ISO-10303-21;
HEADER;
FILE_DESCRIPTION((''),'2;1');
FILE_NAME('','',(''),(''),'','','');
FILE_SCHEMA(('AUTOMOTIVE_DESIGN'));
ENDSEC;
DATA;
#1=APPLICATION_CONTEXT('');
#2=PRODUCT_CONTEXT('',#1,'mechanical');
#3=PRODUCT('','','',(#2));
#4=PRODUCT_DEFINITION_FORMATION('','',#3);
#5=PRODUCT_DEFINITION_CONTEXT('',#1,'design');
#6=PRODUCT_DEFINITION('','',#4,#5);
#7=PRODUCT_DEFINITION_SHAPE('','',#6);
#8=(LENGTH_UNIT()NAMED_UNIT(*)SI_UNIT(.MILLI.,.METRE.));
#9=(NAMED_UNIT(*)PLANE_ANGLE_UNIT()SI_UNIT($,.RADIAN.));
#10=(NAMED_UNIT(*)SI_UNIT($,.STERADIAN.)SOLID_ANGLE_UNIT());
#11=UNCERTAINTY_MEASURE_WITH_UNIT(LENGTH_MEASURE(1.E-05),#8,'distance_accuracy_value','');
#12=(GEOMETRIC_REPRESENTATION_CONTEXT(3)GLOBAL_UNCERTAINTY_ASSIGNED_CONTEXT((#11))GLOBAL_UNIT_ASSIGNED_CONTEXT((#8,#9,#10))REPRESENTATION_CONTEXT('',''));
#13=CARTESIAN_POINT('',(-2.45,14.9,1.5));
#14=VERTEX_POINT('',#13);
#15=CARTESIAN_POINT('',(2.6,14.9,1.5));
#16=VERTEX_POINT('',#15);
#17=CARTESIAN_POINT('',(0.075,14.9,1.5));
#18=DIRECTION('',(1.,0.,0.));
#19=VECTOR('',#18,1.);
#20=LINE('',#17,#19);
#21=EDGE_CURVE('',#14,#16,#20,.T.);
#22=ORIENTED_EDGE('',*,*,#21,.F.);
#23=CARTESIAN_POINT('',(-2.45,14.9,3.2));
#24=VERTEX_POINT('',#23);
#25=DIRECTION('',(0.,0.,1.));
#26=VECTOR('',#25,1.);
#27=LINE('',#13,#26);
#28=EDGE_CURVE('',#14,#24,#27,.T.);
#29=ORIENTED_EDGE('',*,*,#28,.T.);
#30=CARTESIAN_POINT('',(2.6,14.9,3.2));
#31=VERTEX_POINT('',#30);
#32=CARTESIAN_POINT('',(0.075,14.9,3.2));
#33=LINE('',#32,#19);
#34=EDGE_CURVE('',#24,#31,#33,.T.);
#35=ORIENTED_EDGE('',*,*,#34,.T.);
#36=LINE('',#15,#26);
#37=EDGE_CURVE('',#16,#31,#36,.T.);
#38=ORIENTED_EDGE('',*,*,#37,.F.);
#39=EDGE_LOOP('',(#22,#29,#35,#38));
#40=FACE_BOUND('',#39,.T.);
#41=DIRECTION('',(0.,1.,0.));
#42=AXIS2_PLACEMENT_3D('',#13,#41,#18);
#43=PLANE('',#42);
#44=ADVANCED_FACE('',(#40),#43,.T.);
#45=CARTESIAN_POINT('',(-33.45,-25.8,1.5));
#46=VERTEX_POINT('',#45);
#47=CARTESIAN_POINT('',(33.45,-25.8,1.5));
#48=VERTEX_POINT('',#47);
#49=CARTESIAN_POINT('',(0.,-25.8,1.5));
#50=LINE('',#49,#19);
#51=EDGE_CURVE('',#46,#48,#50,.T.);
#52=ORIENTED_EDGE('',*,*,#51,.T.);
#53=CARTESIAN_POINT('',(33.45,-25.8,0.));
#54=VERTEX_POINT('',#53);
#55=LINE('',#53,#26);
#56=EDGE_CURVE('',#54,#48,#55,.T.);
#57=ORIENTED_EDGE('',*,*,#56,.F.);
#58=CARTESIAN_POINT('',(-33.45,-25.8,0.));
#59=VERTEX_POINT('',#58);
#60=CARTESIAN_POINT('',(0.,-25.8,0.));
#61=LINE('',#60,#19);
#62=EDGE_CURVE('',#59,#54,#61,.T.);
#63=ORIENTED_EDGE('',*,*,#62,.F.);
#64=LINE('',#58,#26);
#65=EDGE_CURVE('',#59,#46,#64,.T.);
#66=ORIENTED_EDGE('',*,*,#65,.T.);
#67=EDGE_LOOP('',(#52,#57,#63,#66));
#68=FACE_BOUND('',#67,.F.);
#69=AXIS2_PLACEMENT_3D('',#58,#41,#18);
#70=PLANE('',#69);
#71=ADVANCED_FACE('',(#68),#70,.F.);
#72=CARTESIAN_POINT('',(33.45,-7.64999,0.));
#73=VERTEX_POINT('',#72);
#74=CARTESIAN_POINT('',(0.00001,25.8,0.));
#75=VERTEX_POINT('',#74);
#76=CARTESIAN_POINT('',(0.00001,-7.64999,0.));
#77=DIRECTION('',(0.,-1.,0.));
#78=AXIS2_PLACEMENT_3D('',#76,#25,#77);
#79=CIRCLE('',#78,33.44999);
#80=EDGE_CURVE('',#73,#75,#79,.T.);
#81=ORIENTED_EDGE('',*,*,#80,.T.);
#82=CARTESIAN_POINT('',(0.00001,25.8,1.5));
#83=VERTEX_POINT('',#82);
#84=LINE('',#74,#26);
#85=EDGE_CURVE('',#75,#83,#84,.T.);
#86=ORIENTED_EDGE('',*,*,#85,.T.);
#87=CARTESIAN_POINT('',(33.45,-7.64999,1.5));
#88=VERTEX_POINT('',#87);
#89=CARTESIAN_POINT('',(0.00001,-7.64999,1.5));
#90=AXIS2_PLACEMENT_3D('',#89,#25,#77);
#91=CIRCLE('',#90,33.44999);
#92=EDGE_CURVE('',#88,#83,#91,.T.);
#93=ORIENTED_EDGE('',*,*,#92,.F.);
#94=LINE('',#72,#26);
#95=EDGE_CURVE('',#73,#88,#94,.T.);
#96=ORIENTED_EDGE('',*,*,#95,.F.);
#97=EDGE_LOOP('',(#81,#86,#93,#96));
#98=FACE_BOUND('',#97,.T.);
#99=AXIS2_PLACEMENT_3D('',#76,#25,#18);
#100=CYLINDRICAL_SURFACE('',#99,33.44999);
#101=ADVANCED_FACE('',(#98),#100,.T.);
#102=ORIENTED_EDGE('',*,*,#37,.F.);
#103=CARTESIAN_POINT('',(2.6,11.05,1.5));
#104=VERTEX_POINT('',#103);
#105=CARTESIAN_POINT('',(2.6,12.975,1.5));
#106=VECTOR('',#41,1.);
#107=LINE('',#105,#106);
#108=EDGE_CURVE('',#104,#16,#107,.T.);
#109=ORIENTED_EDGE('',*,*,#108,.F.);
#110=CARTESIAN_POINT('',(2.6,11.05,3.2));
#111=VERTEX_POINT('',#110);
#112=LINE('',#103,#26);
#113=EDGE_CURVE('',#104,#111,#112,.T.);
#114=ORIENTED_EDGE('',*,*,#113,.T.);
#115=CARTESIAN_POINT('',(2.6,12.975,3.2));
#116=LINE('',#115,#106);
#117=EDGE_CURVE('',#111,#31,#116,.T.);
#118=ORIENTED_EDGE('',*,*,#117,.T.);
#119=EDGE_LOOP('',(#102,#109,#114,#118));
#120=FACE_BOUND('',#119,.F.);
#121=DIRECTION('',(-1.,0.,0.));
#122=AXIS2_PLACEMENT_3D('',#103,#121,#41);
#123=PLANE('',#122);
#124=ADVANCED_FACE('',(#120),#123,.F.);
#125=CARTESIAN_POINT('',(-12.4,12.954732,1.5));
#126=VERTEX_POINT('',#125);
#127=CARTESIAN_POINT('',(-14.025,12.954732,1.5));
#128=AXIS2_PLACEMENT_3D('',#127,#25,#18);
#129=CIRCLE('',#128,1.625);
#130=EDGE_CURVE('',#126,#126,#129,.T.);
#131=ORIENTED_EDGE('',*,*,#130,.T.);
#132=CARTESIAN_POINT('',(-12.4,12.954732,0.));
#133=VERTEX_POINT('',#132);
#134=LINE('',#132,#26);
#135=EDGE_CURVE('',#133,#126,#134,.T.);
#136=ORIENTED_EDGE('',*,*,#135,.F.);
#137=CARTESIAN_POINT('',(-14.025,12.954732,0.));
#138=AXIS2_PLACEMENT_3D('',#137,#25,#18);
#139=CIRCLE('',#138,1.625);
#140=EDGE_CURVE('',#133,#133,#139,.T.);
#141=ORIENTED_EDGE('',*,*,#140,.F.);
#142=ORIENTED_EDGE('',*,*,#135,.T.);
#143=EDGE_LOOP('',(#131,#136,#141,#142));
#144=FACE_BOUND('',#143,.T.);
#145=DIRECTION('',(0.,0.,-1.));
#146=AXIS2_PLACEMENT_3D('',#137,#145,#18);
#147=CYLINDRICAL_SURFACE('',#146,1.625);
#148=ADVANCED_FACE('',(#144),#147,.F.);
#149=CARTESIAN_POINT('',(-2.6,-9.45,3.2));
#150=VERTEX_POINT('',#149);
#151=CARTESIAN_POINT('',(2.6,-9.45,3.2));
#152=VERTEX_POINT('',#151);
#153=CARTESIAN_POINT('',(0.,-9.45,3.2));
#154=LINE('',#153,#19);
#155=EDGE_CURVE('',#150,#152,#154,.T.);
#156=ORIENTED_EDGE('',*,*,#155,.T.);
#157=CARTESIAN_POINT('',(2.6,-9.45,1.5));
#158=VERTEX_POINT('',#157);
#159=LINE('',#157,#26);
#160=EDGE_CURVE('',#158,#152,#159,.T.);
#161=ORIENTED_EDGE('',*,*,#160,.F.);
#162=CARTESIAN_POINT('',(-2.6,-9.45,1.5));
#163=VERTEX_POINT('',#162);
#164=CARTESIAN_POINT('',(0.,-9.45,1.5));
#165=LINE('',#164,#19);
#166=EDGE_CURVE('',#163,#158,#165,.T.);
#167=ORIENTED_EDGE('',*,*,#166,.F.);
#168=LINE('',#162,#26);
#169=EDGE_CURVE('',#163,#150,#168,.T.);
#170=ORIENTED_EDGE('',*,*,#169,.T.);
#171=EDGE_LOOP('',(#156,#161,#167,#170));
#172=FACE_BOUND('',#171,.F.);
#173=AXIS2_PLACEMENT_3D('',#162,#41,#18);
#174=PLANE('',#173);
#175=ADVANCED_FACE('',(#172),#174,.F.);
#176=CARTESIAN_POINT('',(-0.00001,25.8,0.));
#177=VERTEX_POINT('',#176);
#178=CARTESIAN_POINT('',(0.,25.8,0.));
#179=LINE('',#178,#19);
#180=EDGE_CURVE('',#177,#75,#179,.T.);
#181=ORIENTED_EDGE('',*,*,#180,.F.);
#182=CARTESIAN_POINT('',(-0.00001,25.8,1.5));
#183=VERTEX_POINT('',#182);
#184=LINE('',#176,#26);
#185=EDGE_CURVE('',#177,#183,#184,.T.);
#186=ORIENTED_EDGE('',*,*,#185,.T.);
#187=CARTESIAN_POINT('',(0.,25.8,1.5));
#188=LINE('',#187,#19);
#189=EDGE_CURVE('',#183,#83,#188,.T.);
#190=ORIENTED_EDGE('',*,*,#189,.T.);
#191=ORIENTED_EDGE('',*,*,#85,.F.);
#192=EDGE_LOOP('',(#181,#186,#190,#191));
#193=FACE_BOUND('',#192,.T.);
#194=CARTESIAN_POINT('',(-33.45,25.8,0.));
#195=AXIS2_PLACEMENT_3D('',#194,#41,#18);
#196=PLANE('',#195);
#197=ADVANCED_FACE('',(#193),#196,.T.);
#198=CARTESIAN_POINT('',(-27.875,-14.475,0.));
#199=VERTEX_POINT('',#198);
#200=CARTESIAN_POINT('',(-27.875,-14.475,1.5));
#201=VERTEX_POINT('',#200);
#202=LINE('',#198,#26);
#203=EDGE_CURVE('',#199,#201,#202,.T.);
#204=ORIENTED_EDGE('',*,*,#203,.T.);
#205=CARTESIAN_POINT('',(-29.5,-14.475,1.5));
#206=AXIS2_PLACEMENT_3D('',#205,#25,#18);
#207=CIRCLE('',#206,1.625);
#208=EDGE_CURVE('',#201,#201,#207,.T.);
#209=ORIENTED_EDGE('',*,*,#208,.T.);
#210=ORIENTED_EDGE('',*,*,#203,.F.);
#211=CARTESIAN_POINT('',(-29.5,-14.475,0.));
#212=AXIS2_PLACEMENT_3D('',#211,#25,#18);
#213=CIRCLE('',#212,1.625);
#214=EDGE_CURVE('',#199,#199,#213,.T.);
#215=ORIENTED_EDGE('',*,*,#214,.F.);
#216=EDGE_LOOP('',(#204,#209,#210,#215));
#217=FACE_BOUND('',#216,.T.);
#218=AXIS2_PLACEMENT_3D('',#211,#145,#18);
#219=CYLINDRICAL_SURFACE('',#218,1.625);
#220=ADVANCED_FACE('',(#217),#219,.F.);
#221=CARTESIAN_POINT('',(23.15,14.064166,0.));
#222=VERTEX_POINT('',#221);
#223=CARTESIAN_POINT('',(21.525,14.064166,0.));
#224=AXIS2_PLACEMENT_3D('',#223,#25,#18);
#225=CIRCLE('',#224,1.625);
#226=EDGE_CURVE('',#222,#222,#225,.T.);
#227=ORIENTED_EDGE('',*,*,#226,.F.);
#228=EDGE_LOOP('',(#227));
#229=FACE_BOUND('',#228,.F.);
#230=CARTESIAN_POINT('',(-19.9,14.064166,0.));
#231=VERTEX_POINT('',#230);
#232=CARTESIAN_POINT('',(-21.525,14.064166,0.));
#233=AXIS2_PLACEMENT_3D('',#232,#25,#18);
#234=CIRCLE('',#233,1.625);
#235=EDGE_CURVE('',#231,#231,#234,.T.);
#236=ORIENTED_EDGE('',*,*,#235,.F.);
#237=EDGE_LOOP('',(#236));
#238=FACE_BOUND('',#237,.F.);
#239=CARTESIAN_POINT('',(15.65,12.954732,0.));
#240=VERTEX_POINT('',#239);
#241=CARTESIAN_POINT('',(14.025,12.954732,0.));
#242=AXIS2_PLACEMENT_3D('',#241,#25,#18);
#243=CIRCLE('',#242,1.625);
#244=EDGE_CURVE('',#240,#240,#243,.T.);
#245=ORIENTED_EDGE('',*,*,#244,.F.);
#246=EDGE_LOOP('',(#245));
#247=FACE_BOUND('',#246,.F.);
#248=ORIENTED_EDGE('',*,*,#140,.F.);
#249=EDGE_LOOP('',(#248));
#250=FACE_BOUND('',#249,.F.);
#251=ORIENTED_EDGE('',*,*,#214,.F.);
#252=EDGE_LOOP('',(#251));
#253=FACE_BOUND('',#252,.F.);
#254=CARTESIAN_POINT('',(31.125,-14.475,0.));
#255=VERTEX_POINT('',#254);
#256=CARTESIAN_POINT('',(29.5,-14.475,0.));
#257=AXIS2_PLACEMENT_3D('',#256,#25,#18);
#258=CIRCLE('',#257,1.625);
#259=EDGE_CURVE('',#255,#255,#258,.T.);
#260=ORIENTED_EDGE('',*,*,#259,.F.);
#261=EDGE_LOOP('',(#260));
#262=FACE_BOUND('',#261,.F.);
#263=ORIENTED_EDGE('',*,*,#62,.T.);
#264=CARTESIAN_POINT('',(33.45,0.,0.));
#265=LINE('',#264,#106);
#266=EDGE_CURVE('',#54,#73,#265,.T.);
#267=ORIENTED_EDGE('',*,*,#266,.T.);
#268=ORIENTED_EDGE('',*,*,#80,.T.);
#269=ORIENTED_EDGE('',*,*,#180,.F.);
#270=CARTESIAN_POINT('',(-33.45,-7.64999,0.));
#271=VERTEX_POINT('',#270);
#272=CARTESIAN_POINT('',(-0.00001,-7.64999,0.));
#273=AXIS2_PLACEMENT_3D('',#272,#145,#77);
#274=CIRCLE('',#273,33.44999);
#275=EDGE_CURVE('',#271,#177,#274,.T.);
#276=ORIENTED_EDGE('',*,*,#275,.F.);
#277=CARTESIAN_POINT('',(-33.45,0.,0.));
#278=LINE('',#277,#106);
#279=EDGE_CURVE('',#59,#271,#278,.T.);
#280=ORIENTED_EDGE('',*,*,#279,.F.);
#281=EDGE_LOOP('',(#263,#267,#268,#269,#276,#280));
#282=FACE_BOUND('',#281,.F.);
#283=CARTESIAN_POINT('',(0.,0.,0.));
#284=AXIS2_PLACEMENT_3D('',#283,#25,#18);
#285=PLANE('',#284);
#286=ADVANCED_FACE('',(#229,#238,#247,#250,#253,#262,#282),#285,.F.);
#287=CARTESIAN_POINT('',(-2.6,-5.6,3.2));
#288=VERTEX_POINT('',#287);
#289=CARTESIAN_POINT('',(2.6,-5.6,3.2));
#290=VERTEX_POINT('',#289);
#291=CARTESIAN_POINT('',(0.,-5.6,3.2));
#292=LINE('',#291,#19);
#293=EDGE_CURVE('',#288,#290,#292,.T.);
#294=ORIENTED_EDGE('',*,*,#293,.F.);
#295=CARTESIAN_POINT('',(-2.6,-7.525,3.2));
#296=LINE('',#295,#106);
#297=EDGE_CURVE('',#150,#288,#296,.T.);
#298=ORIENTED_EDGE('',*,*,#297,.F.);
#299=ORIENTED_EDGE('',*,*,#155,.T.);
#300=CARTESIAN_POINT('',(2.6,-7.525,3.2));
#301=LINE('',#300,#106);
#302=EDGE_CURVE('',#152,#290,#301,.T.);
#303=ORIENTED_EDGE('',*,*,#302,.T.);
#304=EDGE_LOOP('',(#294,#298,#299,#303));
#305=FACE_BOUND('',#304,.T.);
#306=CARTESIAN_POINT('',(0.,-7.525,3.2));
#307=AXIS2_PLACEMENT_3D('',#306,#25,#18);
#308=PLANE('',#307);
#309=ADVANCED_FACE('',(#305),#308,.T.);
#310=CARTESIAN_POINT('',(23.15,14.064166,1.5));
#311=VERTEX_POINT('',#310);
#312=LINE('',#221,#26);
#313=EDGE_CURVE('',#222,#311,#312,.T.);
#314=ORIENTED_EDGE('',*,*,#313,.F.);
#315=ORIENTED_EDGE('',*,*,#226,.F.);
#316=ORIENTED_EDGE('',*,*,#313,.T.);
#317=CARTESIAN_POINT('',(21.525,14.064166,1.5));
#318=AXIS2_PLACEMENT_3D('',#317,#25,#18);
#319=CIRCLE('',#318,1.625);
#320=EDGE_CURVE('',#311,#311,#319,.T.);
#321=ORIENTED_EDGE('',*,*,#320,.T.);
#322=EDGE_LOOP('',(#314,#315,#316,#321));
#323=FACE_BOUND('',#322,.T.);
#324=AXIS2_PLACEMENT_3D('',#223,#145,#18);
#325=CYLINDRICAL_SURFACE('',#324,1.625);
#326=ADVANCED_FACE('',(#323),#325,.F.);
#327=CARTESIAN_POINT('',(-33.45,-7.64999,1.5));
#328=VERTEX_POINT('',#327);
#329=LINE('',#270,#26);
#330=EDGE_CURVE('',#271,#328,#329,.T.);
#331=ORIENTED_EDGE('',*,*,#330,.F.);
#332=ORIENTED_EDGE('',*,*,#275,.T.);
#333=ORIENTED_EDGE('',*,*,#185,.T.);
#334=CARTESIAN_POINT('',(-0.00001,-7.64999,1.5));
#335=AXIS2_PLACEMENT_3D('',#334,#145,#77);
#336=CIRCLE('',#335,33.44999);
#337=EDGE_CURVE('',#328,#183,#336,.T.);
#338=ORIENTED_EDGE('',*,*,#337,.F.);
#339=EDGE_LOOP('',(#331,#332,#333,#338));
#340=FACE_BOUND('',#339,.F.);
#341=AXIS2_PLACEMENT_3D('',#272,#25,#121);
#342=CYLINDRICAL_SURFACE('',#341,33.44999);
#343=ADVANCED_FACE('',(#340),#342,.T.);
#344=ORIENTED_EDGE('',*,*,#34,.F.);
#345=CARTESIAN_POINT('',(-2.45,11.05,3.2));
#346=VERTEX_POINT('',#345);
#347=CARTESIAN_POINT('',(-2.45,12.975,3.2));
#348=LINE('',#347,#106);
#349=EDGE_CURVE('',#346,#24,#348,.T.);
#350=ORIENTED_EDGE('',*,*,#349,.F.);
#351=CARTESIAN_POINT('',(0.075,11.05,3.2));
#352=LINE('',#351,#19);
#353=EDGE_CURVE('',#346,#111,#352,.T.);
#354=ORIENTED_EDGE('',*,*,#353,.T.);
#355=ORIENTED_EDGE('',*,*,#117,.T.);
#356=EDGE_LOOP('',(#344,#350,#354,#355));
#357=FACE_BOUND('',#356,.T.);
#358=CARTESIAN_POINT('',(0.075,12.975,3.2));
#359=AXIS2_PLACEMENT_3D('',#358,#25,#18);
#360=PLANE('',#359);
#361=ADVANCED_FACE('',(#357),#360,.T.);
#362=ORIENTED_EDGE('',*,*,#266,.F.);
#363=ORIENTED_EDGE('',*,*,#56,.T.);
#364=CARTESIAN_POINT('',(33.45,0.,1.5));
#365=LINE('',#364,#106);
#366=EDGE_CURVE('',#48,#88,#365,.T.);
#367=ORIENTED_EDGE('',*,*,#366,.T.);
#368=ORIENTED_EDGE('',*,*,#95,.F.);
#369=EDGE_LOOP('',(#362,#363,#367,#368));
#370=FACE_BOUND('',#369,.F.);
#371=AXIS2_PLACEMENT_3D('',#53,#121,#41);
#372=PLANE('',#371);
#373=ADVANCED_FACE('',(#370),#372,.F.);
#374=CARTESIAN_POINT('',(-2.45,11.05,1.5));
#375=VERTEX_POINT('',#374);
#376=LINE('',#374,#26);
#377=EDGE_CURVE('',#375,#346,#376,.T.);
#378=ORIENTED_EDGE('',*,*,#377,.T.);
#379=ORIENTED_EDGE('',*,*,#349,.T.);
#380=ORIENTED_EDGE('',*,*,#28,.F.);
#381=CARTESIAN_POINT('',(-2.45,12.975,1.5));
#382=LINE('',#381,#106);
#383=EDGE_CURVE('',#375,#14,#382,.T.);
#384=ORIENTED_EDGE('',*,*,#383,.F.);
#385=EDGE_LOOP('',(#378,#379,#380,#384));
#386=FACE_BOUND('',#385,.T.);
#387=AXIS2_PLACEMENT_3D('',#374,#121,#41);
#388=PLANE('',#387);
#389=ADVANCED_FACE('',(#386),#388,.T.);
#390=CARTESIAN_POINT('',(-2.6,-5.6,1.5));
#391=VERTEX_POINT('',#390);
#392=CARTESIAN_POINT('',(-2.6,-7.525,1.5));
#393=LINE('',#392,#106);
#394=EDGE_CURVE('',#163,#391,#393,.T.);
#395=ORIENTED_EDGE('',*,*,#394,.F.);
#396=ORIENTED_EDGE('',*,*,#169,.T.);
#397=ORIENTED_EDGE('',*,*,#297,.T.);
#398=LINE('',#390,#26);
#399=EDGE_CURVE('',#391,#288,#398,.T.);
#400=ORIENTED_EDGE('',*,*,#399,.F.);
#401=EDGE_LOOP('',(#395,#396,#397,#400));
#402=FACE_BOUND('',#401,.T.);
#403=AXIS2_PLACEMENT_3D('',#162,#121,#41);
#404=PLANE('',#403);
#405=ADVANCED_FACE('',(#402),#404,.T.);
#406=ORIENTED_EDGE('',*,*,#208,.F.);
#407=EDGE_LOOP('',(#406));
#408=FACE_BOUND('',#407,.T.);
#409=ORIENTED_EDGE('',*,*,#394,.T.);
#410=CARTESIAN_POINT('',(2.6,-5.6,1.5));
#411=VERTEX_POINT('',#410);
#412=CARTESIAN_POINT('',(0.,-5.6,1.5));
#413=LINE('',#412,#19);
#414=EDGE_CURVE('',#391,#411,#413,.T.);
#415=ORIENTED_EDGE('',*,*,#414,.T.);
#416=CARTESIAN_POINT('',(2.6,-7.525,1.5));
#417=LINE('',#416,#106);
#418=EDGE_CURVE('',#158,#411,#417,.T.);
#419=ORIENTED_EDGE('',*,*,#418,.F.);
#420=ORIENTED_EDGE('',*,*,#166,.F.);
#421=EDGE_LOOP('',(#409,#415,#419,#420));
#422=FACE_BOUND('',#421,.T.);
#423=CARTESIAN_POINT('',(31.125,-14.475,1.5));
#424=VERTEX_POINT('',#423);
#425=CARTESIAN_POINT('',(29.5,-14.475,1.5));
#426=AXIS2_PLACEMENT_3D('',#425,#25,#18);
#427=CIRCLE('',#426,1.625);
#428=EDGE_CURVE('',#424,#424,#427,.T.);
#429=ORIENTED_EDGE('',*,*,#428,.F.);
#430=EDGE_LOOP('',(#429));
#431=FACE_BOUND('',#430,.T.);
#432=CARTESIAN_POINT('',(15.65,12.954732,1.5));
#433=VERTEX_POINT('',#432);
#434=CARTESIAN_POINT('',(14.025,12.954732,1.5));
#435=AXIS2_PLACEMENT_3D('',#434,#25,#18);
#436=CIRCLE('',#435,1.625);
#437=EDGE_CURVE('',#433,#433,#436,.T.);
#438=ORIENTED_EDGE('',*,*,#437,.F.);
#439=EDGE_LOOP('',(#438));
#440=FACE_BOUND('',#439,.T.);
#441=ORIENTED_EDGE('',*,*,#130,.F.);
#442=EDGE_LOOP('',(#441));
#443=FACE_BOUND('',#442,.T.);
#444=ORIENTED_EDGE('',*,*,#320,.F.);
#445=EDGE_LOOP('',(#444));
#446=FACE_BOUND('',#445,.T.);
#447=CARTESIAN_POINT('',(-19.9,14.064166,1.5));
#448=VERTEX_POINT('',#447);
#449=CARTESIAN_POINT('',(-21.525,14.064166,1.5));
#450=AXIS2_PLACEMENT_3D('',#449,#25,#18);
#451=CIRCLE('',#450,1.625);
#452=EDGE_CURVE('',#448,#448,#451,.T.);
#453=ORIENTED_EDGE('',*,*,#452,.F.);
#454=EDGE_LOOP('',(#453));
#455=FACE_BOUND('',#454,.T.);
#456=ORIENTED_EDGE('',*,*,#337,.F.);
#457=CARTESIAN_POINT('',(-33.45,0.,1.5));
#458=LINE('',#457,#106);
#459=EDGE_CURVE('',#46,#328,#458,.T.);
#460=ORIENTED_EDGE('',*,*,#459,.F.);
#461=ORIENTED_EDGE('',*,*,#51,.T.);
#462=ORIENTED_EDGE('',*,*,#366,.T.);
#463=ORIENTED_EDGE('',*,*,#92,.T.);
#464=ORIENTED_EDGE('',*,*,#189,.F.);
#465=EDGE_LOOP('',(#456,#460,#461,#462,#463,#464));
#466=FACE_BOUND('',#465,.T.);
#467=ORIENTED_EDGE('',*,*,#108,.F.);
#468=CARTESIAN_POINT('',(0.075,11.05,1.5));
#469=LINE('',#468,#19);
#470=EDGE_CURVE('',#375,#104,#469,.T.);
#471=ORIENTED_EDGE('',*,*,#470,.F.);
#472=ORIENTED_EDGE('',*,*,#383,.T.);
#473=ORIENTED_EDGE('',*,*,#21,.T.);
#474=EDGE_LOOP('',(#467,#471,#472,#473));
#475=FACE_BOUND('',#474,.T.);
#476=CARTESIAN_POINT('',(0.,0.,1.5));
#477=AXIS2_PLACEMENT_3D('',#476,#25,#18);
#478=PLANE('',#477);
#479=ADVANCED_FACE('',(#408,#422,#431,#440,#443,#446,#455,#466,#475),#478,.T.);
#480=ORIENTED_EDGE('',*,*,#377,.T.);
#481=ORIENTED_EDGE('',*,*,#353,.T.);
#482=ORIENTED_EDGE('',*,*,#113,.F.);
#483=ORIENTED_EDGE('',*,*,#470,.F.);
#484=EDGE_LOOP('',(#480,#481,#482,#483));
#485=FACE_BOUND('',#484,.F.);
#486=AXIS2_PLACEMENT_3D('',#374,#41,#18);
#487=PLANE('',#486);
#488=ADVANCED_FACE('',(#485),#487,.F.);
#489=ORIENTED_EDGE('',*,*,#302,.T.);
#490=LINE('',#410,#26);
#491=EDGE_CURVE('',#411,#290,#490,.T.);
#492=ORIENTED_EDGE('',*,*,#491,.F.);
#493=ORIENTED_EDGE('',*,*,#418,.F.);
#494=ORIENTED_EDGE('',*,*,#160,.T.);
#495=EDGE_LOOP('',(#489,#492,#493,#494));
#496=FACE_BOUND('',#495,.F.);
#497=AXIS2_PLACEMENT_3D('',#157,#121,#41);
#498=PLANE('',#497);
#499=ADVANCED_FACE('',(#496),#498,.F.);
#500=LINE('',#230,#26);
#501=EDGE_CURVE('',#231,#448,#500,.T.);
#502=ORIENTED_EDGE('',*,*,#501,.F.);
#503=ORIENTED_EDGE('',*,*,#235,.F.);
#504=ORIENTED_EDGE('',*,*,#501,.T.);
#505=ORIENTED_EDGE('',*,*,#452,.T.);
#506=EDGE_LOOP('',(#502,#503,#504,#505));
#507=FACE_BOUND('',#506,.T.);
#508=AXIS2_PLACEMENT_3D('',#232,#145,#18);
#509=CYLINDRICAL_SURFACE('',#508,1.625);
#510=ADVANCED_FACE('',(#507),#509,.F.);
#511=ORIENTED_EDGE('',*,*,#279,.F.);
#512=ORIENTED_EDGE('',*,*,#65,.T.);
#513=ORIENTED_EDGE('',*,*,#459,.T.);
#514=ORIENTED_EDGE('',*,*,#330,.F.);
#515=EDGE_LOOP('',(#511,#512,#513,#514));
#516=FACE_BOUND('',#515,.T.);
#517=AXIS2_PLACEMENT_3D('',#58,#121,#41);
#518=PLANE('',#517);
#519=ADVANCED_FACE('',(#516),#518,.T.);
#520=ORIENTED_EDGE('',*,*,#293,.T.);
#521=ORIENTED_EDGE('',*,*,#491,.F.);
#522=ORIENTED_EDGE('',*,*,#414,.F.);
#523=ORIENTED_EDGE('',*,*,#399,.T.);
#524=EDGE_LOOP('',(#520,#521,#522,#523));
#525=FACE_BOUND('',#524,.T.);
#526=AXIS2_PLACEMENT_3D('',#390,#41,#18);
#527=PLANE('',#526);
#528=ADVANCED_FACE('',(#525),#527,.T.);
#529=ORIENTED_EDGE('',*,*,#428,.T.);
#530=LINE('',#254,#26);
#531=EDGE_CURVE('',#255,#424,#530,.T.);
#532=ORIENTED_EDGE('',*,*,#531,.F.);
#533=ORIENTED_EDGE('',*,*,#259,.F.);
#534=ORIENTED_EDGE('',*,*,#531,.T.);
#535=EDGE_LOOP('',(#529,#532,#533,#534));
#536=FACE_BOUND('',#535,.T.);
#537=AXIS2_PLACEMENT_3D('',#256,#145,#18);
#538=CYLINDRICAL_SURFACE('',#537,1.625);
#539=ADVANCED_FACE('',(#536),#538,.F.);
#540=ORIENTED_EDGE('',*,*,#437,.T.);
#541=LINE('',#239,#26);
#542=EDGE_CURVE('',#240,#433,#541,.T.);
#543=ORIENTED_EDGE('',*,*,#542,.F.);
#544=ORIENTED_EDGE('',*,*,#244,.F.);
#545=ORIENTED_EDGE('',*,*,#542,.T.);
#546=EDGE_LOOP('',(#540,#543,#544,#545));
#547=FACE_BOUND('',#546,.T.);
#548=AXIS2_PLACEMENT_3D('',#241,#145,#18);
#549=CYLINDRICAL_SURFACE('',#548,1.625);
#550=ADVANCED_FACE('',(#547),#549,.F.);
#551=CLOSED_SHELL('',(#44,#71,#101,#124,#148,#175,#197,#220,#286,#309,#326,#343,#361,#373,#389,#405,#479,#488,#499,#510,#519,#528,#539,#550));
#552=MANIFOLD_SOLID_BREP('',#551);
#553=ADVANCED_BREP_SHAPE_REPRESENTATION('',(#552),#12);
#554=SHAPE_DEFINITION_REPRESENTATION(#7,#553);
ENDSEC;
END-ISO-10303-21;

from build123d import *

# Parameters (mm, degrees)
F0_W     = 66.9
F0_H     = 51.6
F1_DEPTH = 1.5
F2_R     = 33.44999
F3_R     = 1.625
F4_DEPTH = 1.5
F5_W     = 5.2
F5_H     = 3.85
F5_W_2   = 5.05
F6_DEPTH = 1.7


# Not quite as in the source:
# - a fillet or chamfer is up to 0.001 mm smaller than in the source, because OpenCascade refuses the exact size


with BuildPart() as f1:
    # F0 (on Top) → F1 (new body)
    with BuildSketch(Plane.XY):
        Rectangle(F0_W, F0_H)
    extrude(amount=F1_DEPTH)

    # F2 (radius 33.45 in the source; OpenCascade refuses exactly that, so slightly less here)
    f2_edges = [f1.edges().sort_by_distance(p)[0] for p in [
        (-33.45, 25.8, 0.75),
        (33.45, 25.8, 0.75),
    ]]
    fillet(f2_edges, radius=F2_R)

    # F3 (on Top) → F4 (cut)
    with BuildSketch(Plane.XY):
        with Locations((-21.525, 14.0641658831)):
            Circle(F3_R)
        with Locations((-14.025, 12.9547324661)):
            Circle(F3_R)
        with Locations((21.525, 14.0641658831)):
            Circle(F3_R)
        with Locations((14.025, 12.9547324661)):
            Circle(F3_R)
        with Locations((-29.5, -14.475)):
            Circle(F3_R)
        with Locations((29.5, -14.475)):
            Circle(F3_R)
    extrude(amount=F4_DEPTH, mode=Mode.SUBTRACT)

    # F5 (on face) → F6 (join)
    with BuildSketch(Plane.XY.offset(1.5)):
        with Locations((0, -7.525)):
            Rectangle(F5_W, F5_H)
        with Locations((0.075, 12.975)):
            Rectangle(F5_W_2, F5_H)
    extrude(amount=F6_DEPTH)


solid = f1.part
